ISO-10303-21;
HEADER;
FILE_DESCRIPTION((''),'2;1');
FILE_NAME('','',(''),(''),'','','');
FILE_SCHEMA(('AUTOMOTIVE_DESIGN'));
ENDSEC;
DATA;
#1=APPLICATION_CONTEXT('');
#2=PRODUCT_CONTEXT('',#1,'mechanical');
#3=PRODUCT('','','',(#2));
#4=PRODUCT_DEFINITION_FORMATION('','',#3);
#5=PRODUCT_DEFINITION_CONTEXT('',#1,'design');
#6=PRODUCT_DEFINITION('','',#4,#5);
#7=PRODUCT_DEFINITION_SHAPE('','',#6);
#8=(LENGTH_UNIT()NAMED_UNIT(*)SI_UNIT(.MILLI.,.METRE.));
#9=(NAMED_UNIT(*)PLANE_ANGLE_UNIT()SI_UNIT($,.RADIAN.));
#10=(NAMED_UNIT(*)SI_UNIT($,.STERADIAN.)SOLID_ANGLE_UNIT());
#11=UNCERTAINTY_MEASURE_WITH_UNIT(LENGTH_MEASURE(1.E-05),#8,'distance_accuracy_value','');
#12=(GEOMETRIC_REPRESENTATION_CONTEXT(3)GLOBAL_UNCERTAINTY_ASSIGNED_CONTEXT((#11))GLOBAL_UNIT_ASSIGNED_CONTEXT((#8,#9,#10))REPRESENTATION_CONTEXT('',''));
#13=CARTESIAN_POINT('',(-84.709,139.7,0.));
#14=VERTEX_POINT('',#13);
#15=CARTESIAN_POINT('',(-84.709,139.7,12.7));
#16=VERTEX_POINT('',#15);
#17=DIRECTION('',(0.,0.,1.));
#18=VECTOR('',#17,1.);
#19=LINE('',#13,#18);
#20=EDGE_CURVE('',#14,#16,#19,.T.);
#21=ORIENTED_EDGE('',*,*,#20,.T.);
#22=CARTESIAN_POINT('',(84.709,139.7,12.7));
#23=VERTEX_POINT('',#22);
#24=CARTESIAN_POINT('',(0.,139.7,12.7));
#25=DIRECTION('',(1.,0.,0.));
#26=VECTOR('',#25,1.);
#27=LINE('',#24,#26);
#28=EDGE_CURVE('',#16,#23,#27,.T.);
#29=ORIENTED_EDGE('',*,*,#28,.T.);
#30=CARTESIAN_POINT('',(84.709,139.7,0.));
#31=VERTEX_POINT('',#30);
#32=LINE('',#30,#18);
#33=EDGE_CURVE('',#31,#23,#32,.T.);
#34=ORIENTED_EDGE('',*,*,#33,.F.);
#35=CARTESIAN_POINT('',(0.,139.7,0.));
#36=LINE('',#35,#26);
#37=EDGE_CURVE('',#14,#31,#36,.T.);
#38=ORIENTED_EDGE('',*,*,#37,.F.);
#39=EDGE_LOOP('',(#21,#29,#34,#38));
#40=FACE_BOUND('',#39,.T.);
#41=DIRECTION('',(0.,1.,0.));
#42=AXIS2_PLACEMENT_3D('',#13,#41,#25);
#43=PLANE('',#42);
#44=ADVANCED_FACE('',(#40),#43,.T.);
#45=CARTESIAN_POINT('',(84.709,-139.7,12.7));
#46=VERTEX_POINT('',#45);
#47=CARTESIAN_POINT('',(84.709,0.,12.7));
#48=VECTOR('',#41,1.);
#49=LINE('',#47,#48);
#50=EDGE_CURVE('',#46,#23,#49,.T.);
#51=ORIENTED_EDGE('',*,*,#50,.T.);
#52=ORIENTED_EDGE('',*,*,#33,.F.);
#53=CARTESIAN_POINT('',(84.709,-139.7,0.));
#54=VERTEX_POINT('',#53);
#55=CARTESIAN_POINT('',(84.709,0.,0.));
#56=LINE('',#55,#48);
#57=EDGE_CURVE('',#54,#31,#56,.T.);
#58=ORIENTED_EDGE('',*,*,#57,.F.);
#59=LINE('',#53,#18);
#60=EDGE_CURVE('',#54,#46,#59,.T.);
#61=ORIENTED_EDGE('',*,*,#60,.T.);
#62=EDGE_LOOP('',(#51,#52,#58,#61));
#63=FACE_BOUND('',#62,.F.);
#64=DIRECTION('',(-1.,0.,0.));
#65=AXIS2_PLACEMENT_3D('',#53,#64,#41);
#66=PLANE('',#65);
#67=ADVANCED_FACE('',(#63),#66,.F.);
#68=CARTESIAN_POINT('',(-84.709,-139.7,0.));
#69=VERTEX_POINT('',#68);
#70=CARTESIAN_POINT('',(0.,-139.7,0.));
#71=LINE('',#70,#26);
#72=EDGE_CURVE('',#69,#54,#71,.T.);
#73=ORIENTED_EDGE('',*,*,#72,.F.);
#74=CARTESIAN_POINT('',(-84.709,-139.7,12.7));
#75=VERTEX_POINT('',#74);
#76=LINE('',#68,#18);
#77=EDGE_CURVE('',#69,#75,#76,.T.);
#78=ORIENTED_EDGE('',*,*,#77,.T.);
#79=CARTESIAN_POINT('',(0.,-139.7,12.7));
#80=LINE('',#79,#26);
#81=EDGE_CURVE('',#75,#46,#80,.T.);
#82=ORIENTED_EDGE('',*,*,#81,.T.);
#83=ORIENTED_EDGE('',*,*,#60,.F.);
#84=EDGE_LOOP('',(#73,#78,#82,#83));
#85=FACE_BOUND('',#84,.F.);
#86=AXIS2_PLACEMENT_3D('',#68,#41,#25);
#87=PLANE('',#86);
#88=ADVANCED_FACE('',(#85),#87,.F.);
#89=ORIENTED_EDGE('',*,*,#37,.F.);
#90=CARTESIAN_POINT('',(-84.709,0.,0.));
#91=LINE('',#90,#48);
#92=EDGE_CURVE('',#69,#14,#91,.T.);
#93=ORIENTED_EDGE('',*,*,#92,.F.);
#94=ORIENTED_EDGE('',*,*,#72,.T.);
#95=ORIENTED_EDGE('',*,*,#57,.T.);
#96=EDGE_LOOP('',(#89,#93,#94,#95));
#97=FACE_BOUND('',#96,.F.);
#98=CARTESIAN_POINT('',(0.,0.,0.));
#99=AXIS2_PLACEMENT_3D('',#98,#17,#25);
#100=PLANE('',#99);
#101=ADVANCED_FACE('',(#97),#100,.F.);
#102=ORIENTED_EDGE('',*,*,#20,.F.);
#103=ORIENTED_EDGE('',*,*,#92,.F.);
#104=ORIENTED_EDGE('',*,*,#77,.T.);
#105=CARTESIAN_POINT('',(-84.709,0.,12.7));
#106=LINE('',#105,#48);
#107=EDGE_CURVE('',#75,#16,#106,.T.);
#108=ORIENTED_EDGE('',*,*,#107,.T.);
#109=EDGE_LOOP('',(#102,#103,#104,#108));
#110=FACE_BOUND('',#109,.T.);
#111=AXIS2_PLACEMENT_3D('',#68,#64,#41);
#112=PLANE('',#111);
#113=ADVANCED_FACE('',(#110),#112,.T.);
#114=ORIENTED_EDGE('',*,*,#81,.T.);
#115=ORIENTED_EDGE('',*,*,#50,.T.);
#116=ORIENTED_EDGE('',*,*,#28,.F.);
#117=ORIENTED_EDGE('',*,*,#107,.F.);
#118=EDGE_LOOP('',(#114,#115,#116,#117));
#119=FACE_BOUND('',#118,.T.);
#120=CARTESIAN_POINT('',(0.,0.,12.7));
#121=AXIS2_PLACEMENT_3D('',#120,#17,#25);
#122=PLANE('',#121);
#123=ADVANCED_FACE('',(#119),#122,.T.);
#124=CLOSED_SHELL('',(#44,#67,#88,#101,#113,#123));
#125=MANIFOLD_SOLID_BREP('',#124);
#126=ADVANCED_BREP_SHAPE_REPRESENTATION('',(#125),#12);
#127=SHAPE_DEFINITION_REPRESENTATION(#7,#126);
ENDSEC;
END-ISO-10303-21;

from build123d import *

# Parameters (mm, degrees)
F0_W     = 169.418
F0_H     = 279.4
F1_DEPTH = 12.7


# Not quite as in the source:
# - a feature of the source that left no trace in its solid (it failed there, or was rolled back) is left out


with BuildPart() as f1:
    # F0 (on Top) → F1 (new body)
    with BuildSketch(Plane.XY):
        Rectangle(F0_W, F0_H)
    extrude(amount=F1_DEPTH)


solid = f1.part
